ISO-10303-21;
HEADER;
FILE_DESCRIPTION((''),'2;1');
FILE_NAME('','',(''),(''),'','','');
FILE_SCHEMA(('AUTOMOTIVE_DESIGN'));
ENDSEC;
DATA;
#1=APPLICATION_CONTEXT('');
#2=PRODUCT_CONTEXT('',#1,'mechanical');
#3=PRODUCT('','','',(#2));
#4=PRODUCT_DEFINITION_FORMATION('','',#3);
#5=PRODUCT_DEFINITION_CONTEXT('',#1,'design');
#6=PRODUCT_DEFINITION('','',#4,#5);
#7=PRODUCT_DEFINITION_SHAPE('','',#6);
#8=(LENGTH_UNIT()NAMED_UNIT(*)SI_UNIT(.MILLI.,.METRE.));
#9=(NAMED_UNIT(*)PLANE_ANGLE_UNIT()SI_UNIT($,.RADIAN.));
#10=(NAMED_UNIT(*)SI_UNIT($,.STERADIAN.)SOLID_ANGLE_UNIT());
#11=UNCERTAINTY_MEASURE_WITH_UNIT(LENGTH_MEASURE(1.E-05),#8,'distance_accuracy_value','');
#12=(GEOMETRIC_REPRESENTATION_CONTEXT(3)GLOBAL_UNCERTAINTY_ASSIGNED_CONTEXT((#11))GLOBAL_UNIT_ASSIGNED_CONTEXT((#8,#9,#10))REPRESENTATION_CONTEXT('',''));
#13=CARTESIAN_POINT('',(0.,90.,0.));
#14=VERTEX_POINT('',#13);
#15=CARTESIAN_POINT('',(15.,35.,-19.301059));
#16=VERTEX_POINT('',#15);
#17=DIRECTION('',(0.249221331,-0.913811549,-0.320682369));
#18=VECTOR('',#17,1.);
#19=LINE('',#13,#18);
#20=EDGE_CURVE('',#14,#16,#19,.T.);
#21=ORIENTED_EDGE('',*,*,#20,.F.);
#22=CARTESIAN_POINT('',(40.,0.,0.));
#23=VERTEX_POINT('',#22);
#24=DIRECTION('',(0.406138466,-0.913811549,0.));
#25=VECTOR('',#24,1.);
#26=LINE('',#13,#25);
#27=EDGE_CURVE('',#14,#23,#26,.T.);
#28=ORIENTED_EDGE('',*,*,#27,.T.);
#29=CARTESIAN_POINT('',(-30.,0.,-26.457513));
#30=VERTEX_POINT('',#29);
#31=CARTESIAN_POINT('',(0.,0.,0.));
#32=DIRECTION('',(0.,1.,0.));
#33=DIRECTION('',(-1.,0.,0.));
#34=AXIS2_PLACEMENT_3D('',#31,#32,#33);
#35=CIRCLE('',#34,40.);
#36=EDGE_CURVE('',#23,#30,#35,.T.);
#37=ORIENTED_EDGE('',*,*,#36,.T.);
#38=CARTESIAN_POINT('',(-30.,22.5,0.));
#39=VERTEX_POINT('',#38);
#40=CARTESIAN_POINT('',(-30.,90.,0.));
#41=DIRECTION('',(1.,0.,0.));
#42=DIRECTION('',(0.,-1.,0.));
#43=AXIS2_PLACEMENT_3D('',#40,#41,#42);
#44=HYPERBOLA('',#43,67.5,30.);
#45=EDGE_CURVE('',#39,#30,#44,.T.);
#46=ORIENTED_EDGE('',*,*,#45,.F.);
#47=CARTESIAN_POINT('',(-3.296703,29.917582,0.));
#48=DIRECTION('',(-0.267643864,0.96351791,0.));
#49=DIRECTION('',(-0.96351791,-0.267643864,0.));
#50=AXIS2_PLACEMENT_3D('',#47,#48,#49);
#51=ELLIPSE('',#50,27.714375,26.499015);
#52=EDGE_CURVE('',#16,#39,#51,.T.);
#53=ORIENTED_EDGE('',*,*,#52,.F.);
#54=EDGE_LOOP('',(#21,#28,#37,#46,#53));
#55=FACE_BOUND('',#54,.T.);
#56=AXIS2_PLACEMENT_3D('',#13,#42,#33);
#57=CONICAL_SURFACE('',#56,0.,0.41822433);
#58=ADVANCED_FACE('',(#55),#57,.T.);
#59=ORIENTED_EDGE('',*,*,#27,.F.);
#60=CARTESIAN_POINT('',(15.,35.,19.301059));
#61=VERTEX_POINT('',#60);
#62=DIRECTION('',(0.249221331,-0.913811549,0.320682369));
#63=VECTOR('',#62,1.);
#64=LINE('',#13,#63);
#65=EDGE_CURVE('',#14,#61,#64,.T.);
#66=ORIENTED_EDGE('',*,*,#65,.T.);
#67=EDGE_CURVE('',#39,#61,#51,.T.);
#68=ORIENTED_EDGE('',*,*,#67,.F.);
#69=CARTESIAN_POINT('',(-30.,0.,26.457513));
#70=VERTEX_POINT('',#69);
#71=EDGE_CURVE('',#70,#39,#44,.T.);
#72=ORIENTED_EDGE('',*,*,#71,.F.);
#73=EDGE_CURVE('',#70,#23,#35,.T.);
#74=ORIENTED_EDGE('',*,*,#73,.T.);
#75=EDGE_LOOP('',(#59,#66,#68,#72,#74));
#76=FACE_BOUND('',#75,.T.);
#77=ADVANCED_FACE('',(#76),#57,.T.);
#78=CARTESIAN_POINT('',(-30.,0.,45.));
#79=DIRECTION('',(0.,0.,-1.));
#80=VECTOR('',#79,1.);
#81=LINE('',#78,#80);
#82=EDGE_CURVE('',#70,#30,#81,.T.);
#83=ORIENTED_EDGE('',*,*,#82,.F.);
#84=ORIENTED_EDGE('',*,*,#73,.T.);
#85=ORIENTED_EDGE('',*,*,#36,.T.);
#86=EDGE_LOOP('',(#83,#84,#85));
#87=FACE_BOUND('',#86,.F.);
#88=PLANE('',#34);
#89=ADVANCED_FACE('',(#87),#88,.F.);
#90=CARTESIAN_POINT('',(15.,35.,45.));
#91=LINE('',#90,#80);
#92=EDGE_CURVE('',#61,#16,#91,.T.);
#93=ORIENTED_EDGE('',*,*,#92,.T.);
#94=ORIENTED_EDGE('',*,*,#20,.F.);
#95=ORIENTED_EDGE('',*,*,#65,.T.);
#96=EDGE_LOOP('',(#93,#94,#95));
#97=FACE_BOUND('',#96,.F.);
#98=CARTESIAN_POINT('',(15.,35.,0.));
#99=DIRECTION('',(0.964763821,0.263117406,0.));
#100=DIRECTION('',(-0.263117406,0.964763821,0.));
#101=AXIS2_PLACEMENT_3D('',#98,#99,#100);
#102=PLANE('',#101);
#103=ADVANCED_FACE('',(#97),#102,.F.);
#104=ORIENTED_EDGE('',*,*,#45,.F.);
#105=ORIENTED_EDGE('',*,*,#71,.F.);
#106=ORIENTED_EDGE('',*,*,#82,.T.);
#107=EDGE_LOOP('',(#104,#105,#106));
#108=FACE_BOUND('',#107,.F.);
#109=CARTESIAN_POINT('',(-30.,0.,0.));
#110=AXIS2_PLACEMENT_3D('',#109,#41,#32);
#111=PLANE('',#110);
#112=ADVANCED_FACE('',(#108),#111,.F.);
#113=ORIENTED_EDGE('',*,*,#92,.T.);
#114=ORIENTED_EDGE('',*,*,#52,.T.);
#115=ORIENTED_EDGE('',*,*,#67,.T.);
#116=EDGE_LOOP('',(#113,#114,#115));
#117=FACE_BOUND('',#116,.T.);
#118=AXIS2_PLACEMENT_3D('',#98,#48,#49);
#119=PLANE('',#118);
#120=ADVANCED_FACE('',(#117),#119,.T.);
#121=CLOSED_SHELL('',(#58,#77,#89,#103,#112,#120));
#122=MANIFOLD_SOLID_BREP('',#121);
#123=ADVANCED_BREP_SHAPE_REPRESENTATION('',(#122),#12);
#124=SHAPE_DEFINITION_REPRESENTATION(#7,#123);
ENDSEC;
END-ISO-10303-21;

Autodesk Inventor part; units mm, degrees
ref_plane "YZ Plane" through (0, 0, 0) normal (1, 0, 0) x (0, 1, 0)
ref_plane "XY Plane" through (0, 0, 0) normal (0, 0, 1) x (1, 0, 0)
sketch "Эскиз1" plane through (0, 0, 0) normal (0, 1, 0) x (-1, 0, 0)
  circle A0 centre (0, 0) radius 40
  dimension "d0" = 80
ref_plane "РабПлоскость1" through (0, 90, 0) normal (0, 1, 0) x (-1, 0, 0)
sketch "Эскиз2" plane through (0, 90, 0) normal (0, 1, 0) x (-1, 0, 0)
  point P0 (0, 0)
  point P1 (0, 0)
loft "Лофт1" add profiles "Эскиз1" section 1 point at (0, 90, 0)
sketch "Эскиз3" plane through (0, 0, 0) normal (0, 0, 1) x (1, 0, 0)
  line L0 (15, 0) -> (-30, 0)
  line L1 (-30, 0) -> (-30, 22.5)
  line L2 (15, 35) -> (-30, 22.5)
  line L3 (15, 35) -> (0, 90)
  line L4 (0, 90) -> (40, 0)
  line L5 (40, 0) -> (0, 90) projected
  line L6 (40, 0) -> (-40, 0) projected
  line L7 (15, 0) -> (40, 0)
  point P0 (0, 0)
  dimension "d6" = 45
extrude "Выдавливание1" cut sketch "Эскиз3" against normal mid plane 90 keep common part
